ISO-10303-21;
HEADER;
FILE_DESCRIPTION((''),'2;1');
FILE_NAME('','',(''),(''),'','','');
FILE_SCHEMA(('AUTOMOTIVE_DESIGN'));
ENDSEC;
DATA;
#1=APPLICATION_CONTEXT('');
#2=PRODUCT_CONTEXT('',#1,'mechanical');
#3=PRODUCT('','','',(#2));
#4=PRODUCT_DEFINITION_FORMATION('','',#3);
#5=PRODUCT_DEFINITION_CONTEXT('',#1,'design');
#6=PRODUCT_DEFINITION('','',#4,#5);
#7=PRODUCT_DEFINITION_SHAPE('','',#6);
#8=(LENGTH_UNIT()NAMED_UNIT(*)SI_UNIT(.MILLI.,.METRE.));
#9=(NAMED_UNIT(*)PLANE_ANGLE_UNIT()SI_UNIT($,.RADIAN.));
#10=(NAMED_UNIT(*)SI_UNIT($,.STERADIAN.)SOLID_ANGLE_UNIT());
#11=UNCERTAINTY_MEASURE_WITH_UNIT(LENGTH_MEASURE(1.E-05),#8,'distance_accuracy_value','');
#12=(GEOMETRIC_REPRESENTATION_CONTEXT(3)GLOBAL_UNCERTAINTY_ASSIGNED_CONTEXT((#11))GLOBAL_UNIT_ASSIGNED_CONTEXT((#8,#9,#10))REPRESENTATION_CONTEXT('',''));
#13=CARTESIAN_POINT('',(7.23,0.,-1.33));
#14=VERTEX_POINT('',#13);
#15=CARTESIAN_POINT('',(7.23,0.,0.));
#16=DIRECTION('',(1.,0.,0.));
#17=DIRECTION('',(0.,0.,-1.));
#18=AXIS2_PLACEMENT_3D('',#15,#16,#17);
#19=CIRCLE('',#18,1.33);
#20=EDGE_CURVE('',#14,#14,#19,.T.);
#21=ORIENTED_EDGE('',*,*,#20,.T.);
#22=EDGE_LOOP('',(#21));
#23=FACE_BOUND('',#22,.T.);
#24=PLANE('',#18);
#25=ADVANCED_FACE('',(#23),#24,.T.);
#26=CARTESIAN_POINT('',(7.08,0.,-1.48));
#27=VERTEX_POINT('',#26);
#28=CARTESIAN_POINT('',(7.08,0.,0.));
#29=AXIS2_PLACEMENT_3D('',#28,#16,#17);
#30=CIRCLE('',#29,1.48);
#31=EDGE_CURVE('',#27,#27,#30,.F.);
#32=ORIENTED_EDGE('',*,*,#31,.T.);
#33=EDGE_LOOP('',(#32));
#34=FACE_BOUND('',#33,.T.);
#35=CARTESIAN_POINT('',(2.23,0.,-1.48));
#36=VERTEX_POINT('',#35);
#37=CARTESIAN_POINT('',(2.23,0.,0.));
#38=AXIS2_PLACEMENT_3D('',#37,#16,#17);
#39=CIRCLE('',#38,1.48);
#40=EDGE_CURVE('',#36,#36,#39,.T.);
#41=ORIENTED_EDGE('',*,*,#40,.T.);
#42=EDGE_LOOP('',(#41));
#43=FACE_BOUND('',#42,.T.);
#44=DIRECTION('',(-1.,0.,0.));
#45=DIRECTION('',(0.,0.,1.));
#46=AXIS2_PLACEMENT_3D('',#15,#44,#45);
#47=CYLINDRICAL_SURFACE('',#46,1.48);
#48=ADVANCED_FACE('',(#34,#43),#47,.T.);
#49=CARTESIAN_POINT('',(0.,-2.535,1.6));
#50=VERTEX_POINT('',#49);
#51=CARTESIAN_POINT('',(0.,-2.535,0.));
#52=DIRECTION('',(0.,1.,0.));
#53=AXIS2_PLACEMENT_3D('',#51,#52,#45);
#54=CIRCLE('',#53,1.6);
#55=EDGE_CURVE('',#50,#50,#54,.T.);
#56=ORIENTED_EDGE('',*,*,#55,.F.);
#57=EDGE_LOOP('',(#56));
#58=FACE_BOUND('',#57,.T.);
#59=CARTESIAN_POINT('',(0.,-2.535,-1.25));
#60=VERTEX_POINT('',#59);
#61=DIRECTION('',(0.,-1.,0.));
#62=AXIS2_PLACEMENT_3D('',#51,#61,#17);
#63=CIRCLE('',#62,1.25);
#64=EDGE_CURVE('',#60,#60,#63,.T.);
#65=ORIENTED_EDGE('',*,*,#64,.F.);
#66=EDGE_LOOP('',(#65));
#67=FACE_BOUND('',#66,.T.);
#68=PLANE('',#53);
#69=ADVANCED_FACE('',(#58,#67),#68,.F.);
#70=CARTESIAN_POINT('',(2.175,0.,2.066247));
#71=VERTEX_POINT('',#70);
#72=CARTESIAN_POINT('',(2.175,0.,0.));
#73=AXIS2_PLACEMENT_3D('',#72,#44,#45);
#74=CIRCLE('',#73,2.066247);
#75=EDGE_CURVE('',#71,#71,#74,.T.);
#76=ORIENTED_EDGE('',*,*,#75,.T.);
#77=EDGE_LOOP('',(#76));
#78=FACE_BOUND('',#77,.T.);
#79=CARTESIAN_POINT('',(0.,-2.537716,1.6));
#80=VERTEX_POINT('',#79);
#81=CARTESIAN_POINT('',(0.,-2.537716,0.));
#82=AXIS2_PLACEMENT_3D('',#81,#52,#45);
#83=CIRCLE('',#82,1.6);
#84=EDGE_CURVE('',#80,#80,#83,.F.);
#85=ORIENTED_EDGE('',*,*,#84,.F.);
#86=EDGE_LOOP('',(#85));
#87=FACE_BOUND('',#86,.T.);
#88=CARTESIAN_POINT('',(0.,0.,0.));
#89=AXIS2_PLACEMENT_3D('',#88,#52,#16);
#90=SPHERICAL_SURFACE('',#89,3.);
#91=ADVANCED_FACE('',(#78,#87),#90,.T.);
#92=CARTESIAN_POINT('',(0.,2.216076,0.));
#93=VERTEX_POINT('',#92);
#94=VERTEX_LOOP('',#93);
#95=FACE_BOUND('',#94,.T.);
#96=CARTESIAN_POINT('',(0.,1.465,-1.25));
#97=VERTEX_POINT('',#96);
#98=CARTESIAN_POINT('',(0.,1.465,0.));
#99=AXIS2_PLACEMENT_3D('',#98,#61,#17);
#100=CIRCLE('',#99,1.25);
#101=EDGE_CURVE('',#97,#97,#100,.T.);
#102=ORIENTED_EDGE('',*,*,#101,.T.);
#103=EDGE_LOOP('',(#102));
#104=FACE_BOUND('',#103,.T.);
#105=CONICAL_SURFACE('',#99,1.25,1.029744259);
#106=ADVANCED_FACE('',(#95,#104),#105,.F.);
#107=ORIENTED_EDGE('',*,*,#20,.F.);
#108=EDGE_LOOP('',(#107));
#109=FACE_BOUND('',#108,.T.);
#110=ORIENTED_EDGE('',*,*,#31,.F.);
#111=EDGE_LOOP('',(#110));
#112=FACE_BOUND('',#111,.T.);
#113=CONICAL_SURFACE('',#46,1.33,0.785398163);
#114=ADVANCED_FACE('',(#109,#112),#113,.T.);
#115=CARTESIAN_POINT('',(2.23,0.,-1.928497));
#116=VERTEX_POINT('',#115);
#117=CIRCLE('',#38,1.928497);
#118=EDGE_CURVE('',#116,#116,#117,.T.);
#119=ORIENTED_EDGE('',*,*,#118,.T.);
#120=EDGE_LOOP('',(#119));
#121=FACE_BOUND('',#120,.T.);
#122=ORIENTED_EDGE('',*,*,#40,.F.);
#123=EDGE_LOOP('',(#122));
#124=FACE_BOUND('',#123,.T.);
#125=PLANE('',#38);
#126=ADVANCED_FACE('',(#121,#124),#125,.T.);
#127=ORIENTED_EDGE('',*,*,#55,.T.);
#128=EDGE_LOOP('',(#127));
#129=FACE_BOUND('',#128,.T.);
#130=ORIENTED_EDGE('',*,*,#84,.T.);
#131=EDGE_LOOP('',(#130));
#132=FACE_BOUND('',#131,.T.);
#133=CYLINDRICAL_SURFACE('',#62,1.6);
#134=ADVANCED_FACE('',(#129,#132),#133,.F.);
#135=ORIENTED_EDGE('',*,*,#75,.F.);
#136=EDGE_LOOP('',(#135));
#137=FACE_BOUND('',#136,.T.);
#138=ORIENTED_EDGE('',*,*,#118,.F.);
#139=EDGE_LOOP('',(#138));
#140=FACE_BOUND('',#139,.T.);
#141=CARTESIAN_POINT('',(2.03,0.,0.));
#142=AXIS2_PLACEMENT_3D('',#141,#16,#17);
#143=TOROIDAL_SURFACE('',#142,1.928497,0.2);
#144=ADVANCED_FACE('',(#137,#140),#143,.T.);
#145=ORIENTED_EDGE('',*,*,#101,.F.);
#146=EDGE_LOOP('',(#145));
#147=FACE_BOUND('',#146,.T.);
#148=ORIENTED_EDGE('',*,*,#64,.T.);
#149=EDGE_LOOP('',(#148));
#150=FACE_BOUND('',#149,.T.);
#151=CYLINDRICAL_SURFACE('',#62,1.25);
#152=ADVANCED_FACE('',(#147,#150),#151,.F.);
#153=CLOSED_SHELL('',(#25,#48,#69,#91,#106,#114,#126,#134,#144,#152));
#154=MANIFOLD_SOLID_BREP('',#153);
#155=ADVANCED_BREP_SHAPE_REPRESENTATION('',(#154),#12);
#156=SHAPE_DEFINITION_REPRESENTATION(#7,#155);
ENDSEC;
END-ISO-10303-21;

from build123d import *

# Parameters (mm, degrees)
SKETCH_2_R             = 2
CUT_EXTRUDE_1_DEPTH    = 7.77
SKETCH_3_R             = 1.48
EXTRUDE_1_DEPTH        = 5
FILLET_2_R             = 0.2
FILLET_3_R             = 0.2
CHAMFER_1_SIZE         = 0.15
SKETCH_4_R             = 1.6
CUT_EXTRUDE_3_DEPTH    = 2.465
HOLE_WIZARD_M3_2_D     = 2.5
HOLE_WIZARD_M3_2_DEPTH = 4
HOLE_WIZARD_M3_2_TIP   = 0.7510757737844503


# Some blends are built 0.0001 mm under size
with BuildPart() as part:
    # 草图1 → 旋转1 (revolve)
    with BuildSketch(Plane.XY):
        with BuildLine():
            Line((0, 2.999999999999999), (0, -2.999999999999999))
            ThreePointArc((0, -2.999999999999999), (2.999999999999999, 0), (0, 2.999999999999999))
        make_face()
    revolve(axis=Axis((0, 2.999999999999999, 0), (0, -1, 0)))

    # 草图2 → 切除-拉伸1 (cut)
    with BuildSketch(Plane(origin=(10, 0, 0), x_dir=(0, 0, -1), z_dir=(1, 0, 0))):
        Circle(SKETCH_2_R)
    extrude(amount=-CUT_EXTRUDE_1_DEPTH, mode=Mode.SUBTRACT)

    # 草图3 → 凸台-拉伸1 (add)
    with BuildSketch(Plane(origin=(2.2300000000000004, 0, 0), x_dir=(0, 0, -1), z_dir=(1, 0, 0))):
        Circle(SKETCH_3_R)
    extrude(amount=EXTRUDE_1_DEPTH)

    # 圆角2
    # the kernel refuses this fillet: 0.2 mm, written as the material it takes off along each edge
    with BuildSketch(Plane(origin=(2.236067977499788, 0, 0), x_dir=(0, 1, -1.8e-16), z_dir=(0, -1.8e-16, -1))) as fillet_2_piece_1:
        with BuildLine():
            CenterArc((1.8997145722011748, -0.17910795256821466), FILLET_2_R, 47.27584094143335, 12.629695301093555)
            Line((1.9999999999994043, -0.00606797750081567), (2, 0))
            ThreePointArc((2, 0), (2.0177683971304545, -0.0160205240561484), (2.0354084702155446, -0.03218223650167351))
        make_face()
    revolve(axis=Axis((2.236067977499788, 0, 0), (1, 0, 0)), revolution_arc=180, mode=Mode.SUBTRACT)
    with BuildSketch(Plane(origin=(2.236067977499788, 0, 0), x_dir=(0, -5.7e-16, -1), z_dir=(0, -1, 5.7e-16))) as fillet_2_piece_2:
        with BuildLine():
            CenterArc((1.8997145722011737, -0.17910795256821377), FILLET_2_R, 47.2758409414334, 12.629695301093115)
            Line((1.9999999999994045, -0.00606797750081522), (2, 0))
            ThreePointArc((2, 0), (2.0177683971304545, -0.01602052405614884), (2.0354084702155433, -0.03218223650167262))
        make_face()
    revolve(axis=Axis((2.236067977499788, 0, 0), (1, 0, 0)), revolution_arc=90.00000000000003, mode=Mode.SUBTRACT)
    with BuildSketch(Plane(origin=(2.236067977499788, 0, 0), x_dir=(0, -1, 6e-17), z_dir=(0, 6e-17, 1))) as fillet_2_piece_3:
        with BuildLine():
            CenterArc((1.8997145722011748, -0.17910795256821466), FILLET_2_R, 47.27584094143335, 12.629695301093555)
            Line((1.9999999999994043, -0.00606797750081567), (2, 0))
            ThreePointArc((2, 0), (2.0177683971304545, -0.0160205240561484), (2.0354084702155446, -0.03218223650167351))
        make_face()
    revolve(axis=Axis((2.236067977499788, 0, 0), (1, 0, 0)), revolution_arc=89.99999999999997, mode=Mode.SUBTRACT)

    # 圆角3
    fillet_3_edges = [part.edges().sort_by_distance(p)[0] for p in [
        (2.2299999999999995, -8.1e-16, 1.9999999999999996),
    ]]
    fillet(fillet_3_edges, radius=FILLET_3_R - 0.0001)  # a hair under: the kernel refuses the full size

    # 倒角1
    chamfer_1_edges = [part.edges().sort_by_distance(p)[0] for p in [
        (7.23, -4.8e-16, 1.48),
    ]]
    chamfer(chamfer_1_edges, length=CHAMFER_1_SIZE)

    # 草图4 → 切除-拉伸3 (cut)
    with BuildSketch(Plane(origin=(0, -5, 0), x_dir=(-1, 0, 0), z_dir=(0, 1, 0))):
        with Locations(Location((0, 0, 0), (0, 0, 90))):
            Circle(SKETCH_4_R)
    extrude(amount=CUT_EXTRUDE_3_DEPTH, mode=Mode.SUBTRACT)

    # M3 螺纹孔2
    with Locations(Plane(origin=(0, -2.535, 0), x_dir=(0, 0, -1), z_dir=(0, -1, 0))):
        with Locations((0, 0)):
            Hole(HOLE_WIZARD_M3_2_D / 2, depth=HOLE_WIZARD_M3_2_DEPTH)
            with Locations((0, 0, -(HOLE_WIZARD_M3_2_DEPTH + HOLE_WIZARD_M3_2_TIP / 2))):  # 118° drill point
                Cone(0, HOLE_WIZARD_M3_2_D / 2, HOLE_WIZARD_M3_2_TIP, mode=Mode.SUBTRACT)


solid = part.part
